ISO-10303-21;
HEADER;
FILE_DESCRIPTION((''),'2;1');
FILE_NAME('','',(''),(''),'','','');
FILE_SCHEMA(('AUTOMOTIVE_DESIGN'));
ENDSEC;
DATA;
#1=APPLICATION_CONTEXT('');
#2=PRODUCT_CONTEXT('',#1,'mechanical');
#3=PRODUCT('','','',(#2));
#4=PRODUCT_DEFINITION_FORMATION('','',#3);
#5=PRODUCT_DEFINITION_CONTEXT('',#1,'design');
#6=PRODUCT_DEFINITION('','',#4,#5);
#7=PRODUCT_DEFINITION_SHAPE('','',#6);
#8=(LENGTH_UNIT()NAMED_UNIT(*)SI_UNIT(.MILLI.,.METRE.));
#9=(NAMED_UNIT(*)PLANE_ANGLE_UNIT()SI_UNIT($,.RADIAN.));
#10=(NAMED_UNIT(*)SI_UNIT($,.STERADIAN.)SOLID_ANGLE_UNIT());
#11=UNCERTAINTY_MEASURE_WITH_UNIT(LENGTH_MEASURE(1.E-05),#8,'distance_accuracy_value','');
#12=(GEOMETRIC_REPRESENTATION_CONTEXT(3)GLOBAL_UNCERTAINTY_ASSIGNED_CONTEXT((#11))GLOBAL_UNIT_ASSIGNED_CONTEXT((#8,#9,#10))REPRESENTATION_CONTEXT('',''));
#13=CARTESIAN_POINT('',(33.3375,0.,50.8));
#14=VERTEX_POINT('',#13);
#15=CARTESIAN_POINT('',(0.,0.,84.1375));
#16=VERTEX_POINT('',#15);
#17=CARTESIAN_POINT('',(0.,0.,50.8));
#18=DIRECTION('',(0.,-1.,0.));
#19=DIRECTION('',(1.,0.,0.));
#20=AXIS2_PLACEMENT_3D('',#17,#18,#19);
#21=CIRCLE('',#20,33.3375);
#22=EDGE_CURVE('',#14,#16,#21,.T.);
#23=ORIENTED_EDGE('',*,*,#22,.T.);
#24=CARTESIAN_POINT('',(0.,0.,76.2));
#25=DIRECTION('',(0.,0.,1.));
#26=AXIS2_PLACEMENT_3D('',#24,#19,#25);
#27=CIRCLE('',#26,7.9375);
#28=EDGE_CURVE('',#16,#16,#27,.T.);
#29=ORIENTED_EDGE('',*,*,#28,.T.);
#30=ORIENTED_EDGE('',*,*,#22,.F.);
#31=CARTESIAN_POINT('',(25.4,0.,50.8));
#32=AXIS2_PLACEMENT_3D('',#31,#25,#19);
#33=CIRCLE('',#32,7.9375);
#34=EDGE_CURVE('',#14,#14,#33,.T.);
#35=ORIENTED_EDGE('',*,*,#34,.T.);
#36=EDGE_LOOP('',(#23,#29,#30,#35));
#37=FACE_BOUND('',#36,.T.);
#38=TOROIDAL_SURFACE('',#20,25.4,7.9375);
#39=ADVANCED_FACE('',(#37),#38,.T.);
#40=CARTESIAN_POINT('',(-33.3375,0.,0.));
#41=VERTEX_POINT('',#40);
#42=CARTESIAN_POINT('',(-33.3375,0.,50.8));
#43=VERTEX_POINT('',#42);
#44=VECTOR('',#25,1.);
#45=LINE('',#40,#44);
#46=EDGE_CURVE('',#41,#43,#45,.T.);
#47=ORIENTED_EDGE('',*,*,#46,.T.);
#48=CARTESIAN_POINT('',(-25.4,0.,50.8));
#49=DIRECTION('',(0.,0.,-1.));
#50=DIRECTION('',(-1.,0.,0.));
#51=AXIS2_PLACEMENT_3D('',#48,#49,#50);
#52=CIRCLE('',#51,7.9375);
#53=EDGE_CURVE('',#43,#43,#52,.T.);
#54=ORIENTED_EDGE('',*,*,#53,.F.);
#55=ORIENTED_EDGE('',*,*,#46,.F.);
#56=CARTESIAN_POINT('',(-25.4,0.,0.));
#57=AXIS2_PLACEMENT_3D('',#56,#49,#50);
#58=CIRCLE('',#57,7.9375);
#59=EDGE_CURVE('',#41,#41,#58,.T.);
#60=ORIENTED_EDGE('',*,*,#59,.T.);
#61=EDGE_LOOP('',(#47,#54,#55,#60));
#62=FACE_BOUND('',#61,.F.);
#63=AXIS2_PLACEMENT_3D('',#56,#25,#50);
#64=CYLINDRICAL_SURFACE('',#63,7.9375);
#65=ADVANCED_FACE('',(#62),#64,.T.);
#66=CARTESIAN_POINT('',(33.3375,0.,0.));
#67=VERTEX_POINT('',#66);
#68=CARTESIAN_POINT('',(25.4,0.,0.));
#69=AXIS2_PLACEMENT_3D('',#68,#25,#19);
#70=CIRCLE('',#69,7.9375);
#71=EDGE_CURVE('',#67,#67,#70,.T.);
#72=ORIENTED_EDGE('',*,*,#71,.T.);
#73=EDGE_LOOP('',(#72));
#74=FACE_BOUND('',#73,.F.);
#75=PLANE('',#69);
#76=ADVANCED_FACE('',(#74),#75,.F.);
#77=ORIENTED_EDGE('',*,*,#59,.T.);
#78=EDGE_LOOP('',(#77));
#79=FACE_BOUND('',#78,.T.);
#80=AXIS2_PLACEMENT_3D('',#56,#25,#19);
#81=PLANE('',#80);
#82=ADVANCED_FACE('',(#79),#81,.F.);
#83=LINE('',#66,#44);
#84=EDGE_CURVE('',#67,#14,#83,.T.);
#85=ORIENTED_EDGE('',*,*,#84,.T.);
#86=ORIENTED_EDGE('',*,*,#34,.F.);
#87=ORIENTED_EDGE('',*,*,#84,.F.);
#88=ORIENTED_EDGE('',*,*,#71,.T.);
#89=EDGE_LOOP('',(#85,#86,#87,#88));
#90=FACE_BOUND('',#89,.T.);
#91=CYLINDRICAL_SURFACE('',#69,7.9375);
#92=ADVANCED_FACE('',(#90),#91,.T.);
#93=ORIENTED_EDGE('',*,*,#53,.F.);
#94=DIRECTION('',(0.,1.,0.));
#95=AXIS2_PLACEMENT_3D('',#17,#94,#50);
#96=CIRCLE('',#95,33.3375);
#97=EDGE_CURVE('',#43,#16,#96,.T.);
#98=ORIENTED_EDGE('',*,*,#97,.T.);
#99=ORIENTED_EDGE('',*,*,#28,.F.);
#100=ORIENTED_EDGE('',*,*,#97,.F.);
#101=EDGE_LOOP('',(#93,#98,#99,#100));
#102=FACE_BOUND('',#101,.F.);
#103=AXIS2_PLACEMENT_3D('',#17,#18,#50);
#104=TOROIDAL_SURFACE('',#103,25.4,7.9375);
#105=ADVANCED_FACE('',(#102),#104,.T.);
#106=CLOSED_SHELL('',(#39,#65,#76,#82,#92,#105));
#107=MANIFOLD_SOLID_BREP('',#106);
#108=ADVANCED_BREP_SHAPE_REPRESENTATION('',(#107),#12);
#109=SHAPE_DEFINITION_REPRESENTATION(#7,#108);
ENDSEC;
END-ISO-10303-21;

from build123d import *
from build123d import SkipClean  # not in build123d's __all__


with BuildPart() as f2:
    # F2: sweep along a path in F1
    with BuildLine(Plane.XZ) as f2_path:
        Line((25.4, 0), (25.4, 50.8))
        ThreePointArc((25.4, 50.8), (17.9605122421, 68.7605122421), (0, 76.2))
    # F0 (on Top) → F2 (sweep)
    with BuildSketch(Plane.XY):
        with BuildLine():
            ThreePointArc((17.4625, 0), (25.4, -7.9375), (33.3375, 0))
            ThreePointArc((33.3375, 0), (25.4, 7.9375), (17.4625, 0))
        make_face()
    sweep(path=f2_path.line)

    # F3: F2 across face


with BuildPart() as f2_1:
    add(f2.part, clean=False)
    with SkipClean():  # cleaning this boolean's faces spoils the solid; the shape is the same uncleaned
        add(f2.part.mirror(Plane(origin=(0, 0, 76.2), x_dir=(0, -1, 0), z_dir=(-1, 0, 0))), clean=False)


solid = f2_1.part
